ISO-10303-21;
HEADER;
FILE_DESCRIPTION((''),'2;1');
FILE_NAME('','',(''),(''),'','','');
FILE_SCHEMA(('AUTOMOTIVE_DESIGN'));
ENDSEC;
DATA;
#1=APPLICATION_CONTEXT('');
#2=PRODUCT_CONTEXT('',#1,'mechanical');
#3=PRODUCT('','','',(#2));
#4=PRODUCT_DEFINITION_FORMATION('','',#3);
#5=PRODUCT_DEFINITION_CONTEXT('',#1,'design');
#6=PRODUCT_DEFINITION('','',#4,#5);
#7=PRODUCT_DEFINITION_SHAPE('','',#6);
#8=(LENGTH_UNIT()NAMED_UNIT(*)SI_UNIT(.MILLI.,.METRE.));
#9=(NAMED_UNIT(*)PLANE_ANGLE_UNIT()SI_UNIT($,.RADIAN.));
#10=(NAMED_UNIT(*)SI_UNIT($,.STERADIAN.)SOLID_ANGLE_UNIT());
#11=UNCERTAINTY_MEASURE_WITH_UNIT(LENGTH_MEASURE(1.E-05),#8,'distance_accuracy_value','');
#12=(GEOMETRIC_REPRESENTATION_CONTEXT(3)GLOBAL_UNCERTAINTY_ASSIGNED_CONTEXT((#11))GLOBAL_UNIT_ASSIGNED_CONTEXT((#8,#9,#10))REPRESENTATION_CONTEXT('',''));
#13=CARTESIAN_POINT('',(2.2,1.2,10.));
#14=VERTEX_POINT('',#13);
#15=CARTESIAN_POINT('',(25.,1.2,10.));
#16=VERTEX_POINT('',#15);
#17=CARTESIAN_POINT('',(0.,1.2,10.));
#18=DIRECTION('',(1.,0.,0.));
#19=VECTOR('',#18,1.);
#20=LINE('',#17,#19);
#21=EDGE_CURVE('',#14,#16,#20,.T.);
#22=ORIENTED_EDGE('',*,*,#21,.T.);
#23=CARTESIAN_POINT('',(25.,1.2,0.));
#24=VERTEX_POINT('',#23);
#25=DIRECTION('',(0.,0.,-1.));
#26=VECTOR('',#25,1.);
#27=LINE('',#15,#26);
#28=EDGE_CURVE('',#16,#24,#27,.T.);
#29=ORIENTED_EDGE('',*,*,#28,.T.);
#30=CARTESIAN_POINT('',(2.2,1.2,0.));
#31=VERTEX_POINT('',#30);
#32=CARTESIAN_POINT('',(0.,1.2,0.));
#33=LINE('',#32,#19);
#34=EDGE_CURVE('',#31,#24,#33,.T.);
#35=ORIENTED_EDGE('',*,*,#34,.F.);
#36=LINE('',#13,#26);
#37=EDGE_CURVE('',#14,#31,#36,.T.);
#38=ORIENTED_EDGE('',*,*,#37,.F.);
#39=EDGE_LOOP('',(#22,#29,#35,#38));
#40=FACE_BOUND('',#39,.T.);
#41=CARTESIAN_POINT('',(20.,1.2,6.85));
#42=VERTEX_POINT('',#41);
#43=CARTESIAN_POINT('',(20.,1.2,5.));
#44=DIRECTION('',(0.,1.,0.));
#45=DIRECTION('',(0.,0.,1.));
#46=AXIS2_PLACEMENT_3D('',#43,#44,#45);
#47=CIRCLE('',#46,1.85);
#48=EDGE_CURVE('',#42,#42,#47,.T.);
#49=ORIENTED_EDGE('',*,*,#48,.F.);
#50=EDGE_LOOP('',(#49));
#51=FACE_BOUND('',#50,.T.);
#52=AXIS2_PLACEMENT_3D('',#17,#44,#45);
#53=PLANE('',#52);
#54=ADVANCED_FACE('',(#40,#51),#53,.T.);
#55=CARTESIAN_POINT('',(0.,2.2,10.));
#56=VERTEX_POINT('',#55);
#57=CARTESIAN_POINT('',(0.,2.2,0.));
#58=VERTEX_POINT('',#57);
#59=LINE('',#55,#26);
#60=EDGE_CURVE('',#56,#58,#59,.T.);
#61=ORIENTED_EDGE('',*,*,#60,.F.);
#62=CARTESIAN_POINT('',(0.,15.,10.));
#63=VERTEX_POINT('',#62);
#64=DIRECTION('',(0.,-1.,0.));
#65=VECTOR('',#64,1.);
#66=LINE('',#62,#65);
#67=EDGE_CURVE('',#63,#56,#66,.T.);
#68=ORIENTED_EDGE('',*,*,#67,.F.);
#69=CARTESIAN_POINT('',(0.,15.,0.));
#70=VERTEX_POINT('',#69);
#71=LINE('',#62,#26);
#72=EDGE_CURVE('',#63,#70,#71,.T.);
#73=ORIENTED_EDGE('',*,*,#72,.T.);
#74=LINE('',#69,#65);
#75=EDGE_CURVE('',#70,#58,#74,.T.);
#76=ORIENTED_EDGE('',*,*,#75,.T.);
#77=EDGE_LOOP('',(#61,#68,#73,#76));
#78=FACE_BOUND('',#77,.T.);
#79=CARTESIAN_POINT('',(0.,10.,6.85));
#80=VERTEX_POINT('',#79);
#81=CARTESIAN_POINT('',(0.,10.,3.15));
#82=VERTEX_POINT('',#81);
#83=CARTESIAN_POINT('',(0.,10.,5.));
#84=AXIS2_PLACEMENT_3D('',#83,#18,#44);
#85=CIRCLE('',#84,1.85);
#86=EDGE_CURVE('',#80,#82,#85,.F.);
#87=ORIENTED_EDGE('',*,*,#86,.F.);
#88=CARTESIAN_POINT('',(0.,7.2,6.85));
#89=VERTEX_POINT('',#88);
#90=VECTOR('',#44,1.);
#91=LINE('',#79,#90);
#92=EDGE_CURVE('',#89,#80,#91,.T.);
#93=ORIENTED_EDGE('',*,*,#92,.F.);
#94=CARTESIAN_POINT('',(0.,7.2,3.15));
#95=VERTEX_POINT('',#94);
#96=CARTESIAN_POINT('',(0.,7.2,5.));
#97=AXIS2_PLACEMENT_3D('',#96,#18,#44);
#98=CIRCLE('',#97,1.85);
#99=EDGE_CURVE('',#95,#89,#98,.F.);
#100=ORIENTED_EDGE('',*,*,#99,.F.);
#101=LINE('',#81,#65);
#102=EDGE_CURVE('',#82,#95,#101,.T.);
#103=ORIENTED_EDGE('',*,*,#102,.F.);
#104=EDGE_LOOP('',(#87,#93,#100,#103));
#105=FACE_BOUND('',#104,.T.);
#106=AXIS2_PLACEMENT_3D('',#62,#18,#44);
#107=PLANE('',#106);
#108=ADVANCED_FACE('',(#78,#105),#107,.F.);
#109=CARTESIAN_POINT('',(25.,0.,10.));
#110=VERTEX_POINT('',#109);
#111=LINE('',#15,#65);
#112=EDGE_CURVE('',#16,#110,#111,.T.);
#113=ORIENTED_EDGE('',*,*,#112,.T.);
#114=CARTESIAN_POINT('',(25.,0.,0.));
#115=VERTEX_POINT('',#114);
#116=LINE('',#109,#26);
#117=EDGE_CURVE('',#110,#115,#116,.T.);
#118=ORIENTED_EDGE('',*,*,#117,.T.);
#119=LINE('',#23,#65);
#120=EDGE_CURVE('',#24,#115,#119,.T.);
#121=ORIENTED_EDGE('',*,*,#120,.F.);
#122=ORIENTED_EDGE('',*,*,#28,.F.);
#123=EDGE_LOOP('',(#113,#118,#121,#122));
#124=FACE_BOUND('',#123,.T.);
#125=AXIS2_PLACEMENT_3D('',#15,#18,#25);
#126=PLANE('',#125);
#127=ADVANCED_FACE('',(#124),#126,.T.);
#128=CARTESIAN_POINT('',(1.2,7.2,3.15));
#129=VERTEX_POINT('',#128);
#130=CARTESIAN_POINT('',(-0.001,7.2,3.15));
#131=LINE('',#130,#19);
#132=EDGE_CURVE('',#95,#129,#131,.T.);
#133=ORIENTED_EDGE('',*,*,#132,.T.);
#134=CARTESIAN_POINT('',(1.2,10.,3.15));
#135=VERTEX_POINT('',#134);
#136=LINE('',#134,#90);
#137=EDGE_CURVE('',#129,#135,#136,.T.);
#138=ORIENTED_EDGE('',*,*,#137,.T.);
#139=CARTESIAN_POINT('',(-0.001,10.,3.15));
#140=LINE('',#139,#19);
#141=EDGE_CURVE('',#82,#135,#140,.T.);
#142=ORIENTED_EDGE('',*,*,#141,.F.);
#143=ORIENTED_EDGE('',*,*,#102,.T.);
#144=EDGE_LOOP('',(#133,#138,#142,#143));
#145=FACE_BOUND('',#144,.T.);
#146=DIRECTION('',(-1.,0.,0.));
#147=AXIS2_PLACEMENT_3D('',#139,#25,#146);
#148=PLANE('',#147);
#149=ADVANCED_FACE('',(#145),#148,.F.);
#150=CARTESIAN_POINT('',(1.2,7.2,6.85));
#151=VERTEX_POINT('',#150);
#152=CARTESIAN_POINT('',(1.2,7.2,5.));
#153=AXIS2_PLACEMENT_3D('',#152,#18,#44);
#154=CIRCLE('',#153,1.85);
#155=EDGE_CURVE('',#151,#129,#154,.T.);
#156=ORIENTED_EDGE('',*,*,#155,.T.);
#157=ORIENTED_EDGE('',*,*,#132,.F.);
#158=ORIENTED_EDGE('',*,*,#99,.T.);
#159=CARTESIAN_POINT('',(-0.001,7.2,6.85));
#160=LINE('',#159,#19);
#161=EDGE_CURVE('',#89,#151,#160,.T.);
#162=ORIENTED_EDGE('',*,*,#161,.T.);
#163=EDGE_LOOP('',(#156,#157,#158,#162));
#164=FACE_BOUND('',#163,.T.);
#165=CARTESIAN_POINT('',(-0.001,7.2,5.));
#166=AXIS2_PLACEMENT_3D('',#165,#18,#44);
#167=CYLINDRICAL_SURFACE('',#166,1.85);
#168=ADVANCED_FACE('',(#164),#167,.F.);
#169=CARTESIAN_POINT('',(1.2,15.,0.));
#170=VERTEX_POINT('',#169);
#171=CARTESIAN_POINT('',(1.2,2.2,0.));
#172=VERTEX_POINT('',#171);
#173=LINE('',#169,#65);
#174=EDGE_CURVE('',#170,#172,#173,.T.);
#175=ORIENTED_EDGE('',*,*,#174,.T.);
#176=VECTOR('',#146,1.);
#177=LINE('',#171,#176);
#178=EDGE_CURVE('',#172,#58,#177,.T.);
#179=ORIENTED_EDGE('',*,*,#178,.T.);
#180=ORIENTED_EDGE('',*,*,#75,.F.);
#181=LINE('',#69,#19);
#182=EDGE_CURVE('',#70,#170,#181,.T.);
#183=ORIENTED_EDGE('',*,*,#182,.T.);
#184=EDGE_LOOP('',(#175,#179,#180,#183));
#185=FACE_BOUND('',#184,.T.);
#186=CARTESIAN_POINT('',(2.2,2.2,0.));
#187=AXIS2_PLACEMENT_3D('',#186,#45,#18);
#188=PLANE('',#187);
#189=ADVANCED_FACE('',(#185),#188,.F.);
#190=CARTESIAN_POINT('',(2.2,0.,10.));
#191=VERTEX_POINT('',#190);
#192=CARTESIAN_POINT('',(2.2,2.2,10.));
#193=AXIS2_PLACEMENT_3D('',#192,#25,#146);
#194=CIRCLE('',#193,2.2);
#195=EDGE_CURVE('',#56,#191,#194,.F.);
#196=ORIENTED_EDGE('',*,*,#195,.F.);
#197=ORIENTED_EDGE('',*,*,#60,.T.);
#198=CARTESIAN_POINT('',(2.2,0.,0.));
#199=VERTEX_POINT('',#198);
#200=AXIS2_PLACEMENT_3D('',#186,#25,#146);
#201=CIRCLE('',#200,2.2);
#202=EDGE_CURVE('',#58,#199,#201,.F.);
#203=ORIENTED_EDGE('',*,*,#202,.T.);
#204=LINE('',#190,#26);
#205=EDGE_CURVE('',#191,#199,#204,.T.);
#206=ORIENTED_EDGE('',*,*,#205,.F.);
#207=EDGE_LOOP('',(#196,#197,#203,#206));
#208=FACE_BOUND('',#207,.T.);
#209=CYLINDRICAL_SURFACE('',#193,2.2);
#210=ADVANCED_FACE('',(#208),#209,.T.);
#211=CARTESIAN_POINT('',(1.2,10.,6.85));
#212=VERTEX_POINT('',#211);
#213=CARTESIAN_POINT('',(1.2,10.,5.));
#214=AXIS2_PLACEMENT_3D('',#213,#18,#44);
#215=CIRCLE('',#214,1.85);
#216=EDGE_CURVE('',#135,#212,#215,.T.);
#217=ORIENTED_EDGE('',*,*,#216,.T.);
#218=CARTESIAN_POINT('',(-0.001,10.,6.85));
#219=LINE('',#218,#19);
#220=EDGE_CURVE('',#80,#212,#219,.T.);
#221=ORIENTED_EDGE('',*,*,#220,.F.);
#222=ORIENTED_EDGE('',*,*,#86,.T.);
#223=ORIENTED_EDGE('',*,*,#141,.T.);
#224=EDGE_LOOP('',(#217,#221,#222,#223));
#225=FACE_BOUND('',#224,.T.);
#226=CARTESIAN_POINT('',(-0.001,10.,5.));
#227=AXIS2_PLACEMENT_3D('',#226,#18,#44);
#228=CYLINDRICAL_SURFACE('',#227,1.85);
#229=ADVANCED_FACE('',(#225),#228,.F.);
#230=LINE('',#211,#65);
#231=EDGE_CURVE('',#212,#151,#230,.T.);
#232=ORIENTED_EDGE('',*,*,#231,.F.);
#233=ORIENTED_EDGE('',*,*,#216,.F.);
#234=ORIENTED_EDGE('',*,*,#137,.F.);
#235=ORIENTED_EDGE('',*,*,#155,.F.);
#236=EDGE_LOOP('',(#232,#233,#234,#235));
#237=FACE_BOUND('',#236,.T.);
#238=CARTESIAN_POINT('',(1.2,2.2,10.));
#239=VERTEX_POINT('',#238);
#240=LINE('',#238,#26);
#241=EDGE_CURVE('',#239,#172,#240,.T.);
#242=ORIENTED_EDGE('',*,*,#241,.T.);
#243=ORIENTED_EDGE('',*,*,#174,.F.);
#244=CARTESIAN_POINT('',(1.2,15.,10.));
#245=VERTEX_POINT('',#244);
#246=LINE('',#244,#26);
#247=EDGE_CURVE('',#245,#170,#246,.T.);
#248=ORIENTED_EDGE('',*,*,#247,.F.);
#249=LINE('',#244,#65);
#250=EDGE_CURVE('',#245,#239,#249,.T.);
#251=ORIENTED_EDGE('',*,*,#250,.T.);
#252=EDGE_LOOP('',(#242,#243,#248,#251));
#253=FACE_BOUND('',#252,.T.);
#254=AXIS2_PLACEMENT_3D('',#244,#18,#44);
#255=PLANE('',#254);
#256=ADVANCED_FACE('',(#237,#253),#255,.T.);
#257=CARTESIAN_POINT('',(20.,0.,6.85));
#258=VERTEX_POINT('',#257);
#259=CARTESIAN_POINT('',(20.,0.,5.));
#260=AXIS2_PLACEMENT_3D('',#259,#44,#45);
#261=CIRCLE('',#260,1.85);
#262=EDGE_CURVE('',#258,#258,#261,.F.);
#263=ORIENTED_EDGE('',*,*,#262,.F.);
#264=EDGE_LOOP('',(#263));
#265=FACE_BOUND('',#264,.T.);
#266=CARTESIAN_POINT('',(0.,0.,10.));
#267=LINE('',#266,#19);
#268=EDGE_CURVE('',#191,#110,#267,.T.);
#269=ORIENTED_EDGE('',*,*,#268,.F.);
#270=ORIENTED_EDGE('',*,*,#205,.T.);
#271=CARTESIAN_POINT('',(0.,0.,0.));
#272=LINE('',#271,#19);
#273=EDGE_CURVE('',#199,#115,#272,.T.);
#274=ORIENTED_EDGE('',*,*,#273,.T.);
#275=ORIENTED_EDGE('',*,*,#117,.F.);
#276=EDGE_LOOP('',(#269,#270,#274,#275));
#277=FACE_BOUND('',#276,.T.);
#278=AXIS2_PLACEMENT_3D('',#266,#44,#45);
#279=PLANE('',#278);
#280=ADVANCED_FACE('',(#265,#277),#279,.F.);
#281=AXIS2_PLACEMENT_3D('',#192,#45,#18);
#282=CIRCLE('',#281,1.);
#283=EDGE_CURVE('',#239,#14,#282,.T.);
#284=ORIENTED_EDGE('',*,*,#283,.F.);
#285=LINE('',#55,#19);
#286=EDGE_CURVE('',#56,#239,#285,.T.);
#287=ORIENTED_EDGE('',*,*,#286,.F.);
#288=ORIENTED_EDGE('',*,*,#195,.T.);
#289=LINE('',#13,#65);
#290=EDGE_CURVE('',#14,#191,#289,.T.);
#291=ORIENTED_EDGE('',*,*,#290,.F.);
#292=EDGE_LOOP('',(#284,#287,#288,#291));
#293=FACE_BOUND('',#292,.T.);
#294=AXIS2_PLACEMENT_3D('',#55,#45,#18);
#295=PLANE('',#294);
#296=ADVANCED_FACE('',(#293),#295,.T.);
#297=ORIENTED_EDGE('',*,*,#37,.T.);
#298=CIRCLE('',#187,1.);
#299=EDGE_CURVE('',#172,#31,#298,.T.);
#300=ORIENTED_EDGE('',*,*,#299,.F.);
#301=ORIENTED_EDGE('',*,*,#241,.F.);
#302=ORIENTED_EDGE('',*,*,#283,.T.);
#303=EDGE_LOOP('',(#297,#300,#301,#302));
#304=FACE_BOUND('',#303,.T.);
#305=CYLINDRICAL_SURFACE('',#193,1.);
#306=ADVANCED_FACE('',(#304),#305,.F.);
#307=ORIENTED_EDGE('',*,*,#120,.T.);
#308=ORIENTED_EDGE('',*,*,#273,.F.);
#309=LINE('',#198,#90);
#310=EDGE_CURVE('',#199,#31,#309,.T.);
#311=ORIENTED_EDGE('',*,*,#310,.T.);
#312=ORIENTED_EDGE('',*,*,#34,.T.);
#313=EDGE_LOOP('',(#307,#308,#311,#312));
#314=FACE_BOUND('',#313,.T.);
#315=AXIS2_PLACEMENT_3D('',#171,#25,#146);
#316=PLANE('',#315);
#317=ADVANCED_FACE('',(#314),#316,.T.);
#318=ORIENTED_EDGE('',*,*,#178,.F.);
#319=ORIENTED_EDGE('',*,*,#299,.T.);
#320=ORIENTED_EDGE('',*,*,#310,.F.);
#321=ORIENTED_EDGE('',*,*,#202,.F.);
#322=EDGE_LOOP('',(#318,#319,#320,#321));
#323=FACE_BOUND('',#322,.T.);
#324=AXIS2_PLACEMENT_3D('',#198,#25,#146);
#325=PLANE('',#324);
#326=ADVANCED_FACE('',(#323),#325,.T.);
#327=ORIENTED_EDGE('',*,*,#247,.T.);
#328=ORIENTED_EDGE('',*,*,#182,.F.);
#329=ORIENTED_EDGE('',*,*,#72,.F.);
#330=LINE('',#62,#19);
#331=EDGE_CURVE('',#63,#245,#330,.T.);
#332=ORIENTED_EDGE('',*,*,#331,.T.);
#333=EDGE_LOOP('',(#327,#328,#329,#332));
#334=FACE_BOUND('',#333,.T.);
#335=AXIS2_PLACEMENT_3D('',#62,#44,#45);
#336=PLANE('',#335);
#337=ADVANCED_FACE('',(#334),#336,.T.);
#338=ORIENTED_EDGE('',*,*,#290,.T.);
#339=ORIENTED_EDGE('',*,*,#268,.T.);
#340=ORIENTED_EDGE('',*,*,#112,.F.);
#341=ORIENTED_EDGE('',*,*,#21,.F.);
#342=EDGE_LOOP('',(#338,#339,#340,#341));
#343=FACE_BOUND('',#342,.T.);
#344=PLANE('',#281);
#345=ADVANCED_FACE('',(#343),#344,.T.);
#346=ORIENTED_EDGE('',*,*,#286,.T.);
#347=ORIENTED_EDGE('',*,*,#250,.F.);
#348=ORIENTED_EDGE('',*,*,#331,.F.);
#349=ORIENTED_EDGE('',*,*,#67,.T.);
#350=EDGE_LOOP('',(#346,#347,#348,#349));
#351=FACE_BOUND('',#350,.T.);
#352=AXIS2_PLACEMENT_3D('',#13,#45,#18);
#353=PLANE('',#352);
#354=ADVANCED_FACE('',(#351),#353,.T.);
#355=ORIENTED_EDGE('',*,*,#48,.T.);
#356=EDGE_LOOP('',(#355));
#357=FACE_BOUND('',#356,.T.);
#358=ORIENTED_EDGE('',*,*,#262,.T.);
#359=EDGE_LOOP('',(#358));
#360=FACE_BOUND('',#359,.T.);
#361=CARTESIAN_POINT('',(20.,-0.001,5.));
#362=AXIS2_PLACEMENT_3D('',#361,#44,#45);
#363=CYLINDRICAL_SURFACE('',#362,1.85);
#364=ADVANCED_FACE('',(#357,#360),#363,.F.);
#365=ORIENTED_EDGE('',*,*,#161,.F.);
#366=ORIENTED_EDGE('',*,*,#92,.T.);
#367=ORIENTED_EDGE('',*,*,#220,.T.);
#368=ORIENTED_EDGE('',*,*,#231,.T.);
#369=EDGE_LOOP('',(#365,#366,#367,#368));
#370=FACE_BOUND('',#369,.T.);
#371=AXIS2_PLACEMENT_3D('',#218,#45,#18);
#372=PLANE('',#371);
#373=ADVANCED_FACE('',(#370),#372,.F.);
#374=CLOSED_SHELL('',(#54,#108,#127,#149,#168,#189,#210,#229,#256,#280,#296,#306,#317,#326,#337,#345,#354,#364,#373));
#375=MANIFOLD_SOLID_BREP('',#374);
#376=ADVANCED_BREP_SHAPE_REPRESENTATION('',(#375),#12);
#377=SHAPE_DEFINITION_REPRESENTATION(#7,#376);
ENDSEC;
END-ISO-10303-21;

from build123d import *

# Parameters (mm, degrees)
T_LE_DE_BASE_PLI_E1_DEPTH = 10
ENL_V_MAT_EXTRU_1_REACH   = 32.256
ESQUISSE6_R               = 1.85
ENL_V_MAT_EXTRU_2_REACH   = 31.857


# Sheet-metal steps are written as plain solids
with BuildPart() as part:
    # Esquisse1 → Tôle de base pliée1 (new body)
    with BuildSketch(Plane.XY):
        with BuildLine():
            Line((0, 15), (0, 2.2))
            ThreePointArc((0, 2.2), (0.644365081, 0.644365081), (2.2, 0))
            Line((2.2, 0), (25, 0))
            Line((25, 0), (25, 1.2))
            Line((25, 1.2), (2.2, 1.2))
            ThreePointArc((2.2, 1.2), (1.492893219, 1.492893219), (1.2, 2.2))
            Line((1.2, 2.2), (1.2, 15))
            Line((1.2, 15), (0, 15))
        make_face()
    extrude(amount=T_LE_DE_BASE_PLI_E1_DEPTH)

    # Esquisse6 → Enlèv. mat.-Extru.1 (cut, up to next)
    with BuildSketch(Plane(origin=(0, 1.2, 0), x_dir=(1, 0, 0), z_dir=(0, 1, 0)), mode=Mode.PRIVATE) as enl_v_mat_extru_1_sk1:
        with Locations(Location((20, -5, 0), (0, 0, 270))):
            Circle(ESQUISSE6_R)
    enl_v_mat_extru_1_tool1 = extrude(enl_v_mat_extru_1_sk1.sketch, amount=-ENL_V_MAT_EXTRU_1_REACH, mode=Mode.PRIVATE) & part.part
    add(enl_v_mat_extru_1_tool1.solids().sort_by_distance((20, 1.2, 5))[0], mode=Mode.SUBTRACT)

    # Esquisse7 → Enlèv. mat.-Extru.2 (cut, up to next)
    with BuildSketch(Plane(origin=(1.2, 0, 0), x_dir=(0, 0, -1), z_dir=(1, 0, 0)), mode=Mode.PRIVATE) as enl_v_mat_extru_2_sk1:
        with BuildLine():
            Line((-3.15, 10), (-3.15, 7.2))
            ThreePointArc((-3.15, 7.2), (-5, 5.35), (-6.85, 7.2))
            Line((-6.85, 7.2), (-6.85, 10))
            ThreePointArc((-6.85, 10), (-5, 11.85), (-3.15, 10))
        make_face()
    enl_v_mat_extru_2_tool1 = extrude(enl_v_mat_extru_2_sk1.sketch, amount=-ENL_V_MAT_EXTRU_2_REACH, mode=Mode.PRIVATE) & part.part
    add(enl_v_mat_extru_2_tool1.solids().sort_by_distance((1.2, 8.6, 5))[0], mode=Mode.SUBTRACT)


solid = part.part
